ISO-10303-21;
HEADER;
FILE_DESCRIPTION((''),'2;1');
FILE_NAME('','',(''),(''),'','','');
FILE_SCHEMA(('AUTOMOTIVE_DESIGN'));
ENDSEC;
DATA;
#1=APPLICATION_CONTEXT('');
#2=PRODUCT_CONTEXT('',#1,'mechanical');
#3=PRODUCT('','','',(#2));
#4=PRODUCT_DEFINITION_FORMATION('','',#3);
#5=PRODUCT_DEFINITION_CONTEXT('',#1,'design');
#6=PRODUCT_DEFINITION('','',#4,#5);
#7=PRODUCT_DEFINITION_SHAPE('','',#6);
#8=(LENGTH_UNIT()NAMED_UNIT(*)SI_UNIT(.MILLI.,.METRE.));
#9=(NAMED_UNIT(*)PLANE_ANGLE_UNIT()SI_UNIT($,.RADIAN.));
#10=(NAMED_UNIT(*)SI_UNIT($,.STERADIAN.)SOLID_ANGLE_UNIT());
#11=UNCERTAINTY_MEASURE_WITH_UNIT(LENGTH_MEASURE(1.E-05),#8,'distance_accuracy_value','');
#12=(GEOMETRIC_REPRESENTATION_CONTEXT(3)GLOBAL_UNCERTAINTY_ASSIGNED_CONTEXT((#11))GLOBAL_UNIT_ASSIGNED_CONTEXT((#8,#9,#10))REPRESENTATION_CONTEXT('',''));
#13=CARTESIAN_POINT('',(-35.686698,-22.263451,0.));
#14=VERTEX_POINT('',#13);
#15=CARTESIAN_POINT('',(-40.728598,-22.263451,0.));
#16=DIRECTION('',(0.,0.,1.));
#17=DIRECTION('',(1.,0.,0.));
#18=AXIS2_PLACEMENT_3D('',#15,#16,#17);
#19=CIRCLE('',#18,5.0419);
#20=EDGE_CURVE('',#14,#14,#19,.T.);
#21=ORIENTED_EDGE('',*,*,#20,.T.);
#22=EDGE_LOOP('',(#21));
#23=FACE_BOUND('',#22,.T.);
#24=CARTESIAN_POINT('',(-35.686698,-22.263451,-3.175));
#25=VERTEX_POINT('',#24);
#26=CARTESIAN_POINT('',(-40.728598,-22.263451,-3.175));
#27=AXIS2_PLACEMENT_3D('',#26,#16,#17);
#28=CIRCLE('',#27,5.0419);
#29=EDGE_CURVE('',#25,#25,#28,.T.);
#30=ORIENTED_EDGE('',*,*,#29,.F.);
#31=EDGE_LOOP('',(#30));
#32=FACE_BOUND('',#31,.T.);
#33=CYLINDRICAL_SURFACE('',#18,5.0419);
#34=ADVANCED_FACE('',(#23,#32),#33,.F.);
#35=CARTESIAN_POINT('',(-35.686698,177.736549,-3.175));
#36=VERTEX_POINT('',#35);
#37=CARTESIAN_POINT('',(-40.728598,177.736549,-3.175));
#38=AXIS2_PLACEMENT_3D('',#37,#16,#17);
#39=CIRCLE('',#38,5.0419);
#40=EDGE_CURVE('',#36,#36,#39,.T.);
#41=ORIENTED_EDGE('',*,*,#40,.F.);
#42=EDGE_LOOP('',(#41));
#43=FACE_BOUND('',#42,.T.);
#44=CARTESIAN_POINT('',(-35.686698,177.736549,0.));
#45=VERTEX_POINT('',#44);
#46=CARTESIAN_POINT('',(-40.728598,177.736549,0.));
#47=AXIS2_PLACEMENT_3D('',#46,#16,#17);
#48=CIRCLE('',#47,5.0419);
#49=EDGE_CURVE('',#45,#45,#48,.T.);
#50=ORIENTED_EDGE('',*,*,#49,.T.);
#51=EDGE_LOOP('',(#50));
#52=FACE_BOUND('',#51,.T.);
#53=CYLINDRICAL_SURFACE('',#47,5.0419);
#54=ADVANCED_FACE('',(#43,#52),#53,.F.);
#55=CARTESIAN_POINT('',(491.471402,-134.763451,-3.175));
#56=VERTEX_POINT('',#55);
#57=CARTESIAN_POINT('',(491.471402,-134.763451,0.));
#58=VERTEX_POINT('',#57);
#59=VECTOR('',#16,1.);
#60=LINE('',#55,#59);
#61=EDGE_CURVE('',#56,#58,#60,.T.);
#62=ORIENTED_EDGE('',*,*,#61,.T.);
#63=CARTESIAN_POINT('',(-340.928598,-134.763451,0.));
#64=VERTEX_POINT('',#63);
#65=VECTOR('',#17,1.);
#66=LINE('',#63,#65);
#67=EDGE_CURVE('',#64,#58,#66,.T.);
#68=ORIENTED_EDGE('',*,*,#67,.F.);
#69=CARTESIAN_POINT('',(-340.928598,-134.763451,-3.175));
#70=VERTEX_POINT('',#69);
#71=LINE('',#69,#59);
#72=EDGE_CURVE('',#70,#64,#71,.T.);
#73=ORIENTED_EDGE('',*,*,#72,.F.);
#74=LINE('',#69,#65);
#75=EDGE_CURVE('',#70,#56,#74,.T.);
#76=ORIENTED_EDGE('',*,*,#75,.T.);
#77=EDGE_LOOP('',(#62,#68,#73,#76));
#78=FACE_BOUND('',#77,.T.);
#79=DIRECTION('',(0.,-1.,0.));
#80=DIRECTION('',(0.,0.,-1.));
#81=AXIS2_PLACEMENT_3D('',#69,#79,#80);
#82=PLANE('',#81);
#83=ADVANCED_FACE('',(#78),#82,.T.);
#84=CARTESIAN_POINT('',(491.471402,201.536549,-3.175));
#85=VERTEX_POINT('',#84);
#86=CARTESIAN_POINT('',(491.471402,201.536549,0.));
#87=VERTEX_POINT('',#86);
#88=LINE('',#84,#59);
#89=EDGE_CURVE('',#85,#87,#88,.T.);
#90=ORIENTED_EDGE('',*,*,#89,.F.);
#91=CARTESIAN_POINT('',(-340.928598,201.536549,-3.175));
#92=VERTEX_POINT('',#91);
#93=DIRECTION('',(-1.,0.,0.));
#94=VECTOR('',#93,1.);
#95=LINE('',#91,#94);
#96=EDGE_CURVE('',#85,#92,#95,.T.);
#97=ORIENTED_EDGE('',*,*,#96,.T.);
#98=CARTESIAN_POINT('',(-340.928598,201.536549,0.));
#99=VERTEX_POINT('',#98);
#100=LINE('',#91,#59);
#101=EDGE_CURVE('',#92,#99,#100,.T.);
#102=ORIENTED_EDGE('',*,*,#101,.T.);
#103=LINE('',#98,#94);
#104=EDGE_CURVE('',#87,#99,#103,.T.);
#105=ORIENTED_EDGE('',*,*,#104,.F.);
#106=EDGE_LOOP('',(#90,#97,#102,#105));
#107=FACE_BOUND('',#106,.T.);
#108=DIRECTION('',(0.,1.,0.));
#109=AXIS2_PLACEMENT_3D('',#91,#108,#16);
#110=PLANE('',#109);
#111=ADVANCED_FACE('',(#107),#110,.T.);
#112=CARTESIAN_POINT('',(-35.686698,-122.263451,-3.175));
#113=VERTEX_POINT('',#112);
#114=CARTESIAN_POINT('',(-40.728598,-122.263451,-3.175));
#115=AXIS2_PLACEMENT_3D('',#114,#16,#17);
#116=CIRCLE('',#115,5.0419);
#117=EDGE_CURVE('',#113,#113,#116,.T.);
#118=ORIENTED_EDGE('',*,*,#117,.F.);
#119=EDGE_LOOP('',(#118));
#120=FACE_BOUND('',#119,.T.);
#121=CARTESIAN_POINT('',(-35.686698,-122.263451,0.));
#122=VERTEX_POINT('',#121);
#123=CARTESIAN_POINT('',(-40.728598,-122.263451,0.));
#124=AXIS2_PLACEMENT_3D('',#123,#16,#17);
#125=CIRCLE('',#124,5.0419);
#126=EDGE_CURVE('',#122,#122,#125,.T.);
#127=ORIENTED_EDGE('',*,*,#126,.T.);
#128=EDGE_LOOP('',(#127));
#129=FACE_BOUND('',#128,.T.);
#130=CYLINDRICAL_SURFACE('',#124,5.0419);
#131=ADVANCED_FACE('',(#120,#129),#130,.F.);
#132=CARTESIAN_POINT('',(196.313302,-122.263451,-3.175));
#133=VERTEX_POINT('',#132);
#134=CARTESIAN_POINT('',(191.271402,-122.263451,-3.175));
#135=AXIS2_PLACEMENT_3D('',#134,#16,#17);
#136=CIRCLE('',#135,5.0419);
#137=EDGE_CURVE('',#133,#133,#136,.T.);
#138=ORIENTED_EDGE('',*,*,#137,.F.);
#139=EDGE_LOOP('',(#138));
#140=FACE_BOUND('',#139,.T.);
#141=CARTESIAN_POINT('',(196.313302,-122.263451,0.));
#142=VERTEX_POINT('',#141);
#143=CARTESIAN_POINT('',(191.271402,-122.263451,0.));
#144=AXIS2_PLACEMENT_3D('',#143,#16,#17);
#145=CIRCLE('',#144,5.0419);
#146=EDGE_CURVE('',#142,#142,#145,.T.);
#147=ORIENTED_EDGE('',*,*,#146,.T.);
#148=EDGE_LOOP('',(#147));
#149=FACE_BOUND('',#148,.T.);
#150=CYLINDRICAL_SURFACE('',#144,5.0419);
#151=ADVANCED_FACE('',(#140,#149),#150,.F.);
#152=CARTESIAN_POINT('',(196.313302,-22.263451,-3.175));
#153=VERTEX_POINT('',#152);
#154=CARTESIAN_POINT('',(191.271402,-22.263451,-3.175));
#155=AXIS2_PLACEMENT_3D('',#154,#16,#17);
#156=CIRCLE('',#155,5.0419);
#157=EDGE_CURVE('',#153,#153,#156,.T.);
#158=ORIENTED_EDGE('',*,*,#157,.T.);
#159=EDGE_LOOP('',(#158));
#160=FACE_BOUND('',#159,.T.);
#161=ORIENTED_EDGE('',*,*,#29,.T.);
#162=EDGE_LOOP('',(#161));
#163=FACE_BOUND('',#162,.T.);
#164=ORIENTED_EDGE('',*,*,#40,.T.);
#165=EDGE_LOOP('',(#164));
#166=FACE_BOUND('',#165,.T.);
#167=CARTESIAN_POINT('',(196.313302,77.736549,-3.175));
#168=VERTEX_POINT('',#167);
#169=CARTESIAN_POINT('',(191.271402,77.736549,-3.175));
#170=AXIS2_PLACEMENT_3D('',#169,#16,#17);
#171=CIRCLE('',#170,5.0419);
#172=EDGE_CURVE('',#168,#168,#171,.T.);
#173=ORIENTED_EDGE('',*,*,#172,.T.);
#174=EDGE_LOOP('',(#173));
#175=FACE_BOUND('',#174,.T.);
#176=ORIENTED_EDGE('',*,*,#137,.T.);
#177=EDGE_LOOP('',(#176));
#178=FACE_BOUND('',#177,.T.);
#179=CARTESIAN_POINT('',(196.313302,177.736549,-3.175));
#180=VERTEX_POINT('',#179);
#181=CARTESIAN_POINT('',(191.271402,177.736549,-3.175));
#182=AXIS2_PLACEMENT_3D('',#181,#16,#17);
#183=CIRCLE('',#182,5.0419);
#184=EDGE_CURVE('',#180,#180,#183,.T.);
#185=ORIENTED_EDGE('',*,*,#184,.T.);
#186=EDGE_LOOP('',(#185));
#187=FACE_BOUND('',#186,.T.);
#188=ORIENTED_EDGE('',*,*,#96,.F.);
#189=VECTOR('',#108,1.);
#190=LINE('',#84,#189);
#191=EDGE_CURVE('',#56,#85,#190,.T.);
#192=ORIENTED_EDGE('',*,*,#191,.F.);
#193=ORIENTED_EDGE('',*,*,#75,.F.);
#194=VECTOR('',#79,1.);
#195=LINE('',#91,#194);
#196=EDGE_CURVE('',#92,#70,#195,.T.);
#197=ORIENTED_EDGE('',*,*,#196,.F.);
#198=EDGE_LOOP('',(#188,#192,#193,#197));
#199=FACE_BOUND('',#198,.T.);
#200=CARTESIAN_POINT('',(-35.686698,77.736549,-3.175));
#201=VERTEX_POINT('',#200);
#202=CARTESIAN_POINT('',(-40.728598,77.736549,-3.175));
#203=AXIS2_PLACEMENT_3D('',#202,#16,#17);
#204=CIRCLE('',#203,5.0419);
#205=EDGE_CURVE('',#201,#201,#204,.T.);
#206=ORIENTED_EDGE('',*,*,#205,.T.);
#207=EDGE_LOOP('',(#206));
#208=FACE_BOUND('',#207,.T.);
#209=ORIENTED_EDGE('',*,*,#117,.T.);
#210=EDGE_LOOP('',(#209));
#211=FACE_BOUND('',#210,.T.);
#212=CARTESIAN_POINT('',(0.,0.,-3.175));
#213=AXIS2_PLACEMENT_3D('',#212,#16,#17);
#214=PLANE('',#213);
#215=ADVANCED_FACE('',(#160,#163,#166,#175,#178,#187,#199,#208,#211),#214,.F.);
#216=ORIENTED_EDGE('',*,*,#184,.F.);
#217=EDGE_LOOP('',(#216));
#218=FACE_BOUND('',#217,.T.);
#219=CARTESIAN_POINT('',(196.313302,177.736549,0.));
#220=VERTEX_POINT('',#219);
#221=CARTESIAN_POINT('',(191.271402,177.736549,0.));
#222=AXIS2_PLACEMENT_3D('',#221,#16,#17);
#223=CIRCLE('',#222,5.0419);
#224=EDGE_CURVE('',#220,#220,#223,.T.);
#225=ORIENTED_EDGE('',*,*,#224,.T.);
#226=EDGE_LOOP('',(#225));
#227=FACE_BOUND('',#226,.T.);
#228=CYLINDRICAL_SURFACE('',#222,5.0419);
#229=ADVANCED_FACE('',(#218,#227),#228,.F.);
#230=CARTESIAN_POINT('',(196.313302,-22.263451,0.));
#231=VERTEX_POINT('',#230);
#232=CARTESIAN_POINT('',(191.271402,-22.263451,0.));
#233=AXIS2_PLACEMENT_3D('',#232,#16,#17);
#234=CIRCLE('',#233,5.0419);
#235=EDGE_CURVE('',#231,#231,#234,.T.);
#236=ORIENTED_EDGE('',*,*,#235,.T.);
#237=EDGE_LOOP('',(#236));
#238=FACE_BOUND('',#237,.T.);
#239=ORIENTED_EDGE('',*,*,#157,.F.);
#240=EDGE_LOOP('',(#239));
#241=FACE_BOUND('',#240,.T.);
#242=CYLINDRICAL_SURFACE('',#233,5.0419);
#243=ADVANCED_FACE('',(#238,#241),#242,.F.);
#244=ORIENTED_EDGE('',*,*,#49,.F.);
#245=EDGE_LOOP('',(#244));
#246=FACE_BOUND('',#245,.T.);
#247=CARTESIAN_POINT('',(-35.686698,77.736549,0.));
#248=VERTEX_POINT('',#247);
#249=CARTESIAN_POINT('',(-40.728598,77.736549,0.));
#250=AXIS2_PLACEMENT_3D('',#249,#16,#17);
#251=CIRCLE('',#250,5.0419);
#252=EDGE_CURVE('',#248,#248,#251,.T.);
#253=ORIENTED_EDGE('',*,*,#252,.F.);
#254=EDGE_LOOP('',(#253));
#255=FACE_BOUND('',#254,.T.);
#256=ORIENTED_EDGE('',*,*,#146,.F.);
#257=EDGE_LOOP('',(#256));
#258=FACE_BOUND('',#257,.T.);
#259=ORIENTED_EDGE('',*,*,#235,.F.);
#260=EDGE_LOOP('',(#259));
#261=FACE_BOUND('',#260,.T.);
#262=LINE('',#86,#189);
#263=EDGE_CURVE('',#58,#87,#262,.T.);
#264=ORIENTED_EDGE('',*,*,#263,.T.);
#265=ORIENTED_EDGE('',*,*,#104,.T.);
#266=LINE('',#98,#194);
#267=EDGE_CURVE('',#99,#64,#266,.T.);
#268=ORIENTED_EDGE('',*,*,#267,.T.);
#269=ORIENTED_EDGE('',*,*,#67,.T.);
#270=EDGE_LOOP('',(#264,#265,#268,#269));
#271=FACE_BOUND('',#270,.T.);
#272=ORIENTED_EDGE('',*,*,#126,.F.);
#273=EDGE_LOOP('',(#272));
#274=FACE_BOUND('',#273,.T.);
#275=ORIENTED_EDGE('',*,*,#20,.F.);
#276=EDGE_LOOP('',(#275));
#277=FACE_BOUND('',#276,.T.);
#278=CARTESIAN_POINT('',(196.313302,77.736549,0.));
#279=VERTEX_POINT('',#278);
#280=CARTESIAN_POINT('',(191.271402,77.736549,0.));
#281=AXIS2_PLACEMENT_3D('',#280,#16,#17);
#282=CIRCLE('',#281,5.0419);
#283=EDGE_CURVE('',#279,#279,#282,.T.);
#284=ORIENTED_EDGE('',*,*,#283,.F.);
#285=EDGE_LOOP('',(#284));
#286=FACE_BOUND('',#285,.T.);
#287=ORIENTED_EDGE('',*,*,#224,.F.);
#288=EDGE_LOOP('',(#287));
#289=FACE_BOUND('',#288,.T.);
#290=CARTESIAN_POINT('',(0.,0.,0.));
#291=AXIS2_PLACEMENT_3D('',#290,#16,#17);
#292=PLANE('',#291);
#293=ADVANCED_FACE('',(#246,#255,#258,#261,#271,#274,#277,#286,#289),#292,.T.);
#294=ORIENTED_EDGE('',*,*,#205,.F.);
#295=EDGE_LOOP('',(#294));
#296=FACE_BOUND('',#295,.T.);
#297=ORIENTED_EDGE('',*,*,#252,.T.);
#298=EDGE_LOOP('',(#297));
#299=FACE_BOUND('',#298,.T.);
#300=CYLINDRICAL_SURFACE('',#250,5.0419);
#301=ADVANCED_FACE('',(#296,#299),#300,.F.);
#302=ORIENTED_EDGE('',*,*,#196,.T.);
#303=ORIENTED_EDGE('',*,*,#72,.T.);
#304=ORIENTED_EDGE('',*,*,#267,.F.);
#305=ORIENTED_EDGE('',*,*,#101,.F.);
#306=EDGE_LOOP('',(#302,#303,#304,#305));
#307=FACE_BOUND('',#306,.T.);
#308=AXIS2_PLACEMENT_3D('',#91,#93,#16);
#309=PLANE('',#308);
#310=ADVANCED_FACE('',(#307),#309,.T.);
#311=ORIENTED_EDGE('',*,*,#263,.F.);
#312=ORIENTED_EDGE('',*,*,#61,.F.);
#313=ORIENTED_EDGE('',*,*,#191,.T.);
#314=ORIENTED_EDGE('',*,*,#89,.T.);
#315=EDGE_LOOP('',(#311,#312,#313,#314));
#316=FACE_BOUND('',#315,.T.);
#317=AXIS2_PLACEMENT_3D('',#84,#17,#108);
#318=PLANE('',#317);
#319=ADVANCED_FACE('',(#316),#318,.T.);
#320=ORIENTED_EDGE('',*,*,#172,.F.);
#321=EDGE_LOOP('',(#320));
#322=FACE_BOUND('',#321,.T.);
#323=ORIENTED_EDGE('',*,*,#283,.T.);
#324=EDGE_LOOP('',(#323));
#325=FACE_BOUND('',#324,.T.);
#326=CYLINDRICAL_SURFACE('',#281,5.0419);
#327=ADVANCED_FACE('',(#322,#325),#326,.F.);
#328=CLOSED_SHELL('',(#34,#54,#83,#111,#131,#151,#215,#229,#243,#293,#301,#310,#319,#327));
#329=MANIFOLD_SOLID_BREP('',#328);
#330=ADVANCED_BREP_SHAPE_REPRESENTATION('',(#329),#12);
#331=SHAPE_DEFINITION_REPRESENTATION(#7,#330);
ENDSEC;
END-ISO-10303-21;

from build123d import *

# Parameters (mm, degrees)
CROQUIS1_W                    = 832.4
CROQUIS1_H                    = 336.3
BRIDA_BASE1_DEPTH             = 3.175
TALADRO_DE_MARGEN_PARA_3_81_D = 10.0838


# Sheet-metal steps are written as plain solids
with BuildPart() as part:
    # Croquis1 → Brida base1 (new body)
    with BuildSketch(Plane.XY):
        with Locations((75.271401719, 33.386549165)):
            Rectangle(CROQUIS1_W, CROQUIS1_H)
    extrude(amount=-BRIDA_BASE1_DEPTH)

    # Taladro de margen para 3/81 (through all)
    with Locations(Plane.XY):
        with Locations((-40.728598281, 77.736549165), (-40.728598281, -22.263450835), (191.271401719, 77.736549165), (191.271401719, -22.263450835), (-40.728598281, -122.263450835), (191.271401719, -122.263450835), (191.271401719, 177.736549165), (-40.728598281, 177.736549165)):
            Hole(TALADRO_DE_MARGEN_PARA_3_81_D / 2)


solid = part.part
